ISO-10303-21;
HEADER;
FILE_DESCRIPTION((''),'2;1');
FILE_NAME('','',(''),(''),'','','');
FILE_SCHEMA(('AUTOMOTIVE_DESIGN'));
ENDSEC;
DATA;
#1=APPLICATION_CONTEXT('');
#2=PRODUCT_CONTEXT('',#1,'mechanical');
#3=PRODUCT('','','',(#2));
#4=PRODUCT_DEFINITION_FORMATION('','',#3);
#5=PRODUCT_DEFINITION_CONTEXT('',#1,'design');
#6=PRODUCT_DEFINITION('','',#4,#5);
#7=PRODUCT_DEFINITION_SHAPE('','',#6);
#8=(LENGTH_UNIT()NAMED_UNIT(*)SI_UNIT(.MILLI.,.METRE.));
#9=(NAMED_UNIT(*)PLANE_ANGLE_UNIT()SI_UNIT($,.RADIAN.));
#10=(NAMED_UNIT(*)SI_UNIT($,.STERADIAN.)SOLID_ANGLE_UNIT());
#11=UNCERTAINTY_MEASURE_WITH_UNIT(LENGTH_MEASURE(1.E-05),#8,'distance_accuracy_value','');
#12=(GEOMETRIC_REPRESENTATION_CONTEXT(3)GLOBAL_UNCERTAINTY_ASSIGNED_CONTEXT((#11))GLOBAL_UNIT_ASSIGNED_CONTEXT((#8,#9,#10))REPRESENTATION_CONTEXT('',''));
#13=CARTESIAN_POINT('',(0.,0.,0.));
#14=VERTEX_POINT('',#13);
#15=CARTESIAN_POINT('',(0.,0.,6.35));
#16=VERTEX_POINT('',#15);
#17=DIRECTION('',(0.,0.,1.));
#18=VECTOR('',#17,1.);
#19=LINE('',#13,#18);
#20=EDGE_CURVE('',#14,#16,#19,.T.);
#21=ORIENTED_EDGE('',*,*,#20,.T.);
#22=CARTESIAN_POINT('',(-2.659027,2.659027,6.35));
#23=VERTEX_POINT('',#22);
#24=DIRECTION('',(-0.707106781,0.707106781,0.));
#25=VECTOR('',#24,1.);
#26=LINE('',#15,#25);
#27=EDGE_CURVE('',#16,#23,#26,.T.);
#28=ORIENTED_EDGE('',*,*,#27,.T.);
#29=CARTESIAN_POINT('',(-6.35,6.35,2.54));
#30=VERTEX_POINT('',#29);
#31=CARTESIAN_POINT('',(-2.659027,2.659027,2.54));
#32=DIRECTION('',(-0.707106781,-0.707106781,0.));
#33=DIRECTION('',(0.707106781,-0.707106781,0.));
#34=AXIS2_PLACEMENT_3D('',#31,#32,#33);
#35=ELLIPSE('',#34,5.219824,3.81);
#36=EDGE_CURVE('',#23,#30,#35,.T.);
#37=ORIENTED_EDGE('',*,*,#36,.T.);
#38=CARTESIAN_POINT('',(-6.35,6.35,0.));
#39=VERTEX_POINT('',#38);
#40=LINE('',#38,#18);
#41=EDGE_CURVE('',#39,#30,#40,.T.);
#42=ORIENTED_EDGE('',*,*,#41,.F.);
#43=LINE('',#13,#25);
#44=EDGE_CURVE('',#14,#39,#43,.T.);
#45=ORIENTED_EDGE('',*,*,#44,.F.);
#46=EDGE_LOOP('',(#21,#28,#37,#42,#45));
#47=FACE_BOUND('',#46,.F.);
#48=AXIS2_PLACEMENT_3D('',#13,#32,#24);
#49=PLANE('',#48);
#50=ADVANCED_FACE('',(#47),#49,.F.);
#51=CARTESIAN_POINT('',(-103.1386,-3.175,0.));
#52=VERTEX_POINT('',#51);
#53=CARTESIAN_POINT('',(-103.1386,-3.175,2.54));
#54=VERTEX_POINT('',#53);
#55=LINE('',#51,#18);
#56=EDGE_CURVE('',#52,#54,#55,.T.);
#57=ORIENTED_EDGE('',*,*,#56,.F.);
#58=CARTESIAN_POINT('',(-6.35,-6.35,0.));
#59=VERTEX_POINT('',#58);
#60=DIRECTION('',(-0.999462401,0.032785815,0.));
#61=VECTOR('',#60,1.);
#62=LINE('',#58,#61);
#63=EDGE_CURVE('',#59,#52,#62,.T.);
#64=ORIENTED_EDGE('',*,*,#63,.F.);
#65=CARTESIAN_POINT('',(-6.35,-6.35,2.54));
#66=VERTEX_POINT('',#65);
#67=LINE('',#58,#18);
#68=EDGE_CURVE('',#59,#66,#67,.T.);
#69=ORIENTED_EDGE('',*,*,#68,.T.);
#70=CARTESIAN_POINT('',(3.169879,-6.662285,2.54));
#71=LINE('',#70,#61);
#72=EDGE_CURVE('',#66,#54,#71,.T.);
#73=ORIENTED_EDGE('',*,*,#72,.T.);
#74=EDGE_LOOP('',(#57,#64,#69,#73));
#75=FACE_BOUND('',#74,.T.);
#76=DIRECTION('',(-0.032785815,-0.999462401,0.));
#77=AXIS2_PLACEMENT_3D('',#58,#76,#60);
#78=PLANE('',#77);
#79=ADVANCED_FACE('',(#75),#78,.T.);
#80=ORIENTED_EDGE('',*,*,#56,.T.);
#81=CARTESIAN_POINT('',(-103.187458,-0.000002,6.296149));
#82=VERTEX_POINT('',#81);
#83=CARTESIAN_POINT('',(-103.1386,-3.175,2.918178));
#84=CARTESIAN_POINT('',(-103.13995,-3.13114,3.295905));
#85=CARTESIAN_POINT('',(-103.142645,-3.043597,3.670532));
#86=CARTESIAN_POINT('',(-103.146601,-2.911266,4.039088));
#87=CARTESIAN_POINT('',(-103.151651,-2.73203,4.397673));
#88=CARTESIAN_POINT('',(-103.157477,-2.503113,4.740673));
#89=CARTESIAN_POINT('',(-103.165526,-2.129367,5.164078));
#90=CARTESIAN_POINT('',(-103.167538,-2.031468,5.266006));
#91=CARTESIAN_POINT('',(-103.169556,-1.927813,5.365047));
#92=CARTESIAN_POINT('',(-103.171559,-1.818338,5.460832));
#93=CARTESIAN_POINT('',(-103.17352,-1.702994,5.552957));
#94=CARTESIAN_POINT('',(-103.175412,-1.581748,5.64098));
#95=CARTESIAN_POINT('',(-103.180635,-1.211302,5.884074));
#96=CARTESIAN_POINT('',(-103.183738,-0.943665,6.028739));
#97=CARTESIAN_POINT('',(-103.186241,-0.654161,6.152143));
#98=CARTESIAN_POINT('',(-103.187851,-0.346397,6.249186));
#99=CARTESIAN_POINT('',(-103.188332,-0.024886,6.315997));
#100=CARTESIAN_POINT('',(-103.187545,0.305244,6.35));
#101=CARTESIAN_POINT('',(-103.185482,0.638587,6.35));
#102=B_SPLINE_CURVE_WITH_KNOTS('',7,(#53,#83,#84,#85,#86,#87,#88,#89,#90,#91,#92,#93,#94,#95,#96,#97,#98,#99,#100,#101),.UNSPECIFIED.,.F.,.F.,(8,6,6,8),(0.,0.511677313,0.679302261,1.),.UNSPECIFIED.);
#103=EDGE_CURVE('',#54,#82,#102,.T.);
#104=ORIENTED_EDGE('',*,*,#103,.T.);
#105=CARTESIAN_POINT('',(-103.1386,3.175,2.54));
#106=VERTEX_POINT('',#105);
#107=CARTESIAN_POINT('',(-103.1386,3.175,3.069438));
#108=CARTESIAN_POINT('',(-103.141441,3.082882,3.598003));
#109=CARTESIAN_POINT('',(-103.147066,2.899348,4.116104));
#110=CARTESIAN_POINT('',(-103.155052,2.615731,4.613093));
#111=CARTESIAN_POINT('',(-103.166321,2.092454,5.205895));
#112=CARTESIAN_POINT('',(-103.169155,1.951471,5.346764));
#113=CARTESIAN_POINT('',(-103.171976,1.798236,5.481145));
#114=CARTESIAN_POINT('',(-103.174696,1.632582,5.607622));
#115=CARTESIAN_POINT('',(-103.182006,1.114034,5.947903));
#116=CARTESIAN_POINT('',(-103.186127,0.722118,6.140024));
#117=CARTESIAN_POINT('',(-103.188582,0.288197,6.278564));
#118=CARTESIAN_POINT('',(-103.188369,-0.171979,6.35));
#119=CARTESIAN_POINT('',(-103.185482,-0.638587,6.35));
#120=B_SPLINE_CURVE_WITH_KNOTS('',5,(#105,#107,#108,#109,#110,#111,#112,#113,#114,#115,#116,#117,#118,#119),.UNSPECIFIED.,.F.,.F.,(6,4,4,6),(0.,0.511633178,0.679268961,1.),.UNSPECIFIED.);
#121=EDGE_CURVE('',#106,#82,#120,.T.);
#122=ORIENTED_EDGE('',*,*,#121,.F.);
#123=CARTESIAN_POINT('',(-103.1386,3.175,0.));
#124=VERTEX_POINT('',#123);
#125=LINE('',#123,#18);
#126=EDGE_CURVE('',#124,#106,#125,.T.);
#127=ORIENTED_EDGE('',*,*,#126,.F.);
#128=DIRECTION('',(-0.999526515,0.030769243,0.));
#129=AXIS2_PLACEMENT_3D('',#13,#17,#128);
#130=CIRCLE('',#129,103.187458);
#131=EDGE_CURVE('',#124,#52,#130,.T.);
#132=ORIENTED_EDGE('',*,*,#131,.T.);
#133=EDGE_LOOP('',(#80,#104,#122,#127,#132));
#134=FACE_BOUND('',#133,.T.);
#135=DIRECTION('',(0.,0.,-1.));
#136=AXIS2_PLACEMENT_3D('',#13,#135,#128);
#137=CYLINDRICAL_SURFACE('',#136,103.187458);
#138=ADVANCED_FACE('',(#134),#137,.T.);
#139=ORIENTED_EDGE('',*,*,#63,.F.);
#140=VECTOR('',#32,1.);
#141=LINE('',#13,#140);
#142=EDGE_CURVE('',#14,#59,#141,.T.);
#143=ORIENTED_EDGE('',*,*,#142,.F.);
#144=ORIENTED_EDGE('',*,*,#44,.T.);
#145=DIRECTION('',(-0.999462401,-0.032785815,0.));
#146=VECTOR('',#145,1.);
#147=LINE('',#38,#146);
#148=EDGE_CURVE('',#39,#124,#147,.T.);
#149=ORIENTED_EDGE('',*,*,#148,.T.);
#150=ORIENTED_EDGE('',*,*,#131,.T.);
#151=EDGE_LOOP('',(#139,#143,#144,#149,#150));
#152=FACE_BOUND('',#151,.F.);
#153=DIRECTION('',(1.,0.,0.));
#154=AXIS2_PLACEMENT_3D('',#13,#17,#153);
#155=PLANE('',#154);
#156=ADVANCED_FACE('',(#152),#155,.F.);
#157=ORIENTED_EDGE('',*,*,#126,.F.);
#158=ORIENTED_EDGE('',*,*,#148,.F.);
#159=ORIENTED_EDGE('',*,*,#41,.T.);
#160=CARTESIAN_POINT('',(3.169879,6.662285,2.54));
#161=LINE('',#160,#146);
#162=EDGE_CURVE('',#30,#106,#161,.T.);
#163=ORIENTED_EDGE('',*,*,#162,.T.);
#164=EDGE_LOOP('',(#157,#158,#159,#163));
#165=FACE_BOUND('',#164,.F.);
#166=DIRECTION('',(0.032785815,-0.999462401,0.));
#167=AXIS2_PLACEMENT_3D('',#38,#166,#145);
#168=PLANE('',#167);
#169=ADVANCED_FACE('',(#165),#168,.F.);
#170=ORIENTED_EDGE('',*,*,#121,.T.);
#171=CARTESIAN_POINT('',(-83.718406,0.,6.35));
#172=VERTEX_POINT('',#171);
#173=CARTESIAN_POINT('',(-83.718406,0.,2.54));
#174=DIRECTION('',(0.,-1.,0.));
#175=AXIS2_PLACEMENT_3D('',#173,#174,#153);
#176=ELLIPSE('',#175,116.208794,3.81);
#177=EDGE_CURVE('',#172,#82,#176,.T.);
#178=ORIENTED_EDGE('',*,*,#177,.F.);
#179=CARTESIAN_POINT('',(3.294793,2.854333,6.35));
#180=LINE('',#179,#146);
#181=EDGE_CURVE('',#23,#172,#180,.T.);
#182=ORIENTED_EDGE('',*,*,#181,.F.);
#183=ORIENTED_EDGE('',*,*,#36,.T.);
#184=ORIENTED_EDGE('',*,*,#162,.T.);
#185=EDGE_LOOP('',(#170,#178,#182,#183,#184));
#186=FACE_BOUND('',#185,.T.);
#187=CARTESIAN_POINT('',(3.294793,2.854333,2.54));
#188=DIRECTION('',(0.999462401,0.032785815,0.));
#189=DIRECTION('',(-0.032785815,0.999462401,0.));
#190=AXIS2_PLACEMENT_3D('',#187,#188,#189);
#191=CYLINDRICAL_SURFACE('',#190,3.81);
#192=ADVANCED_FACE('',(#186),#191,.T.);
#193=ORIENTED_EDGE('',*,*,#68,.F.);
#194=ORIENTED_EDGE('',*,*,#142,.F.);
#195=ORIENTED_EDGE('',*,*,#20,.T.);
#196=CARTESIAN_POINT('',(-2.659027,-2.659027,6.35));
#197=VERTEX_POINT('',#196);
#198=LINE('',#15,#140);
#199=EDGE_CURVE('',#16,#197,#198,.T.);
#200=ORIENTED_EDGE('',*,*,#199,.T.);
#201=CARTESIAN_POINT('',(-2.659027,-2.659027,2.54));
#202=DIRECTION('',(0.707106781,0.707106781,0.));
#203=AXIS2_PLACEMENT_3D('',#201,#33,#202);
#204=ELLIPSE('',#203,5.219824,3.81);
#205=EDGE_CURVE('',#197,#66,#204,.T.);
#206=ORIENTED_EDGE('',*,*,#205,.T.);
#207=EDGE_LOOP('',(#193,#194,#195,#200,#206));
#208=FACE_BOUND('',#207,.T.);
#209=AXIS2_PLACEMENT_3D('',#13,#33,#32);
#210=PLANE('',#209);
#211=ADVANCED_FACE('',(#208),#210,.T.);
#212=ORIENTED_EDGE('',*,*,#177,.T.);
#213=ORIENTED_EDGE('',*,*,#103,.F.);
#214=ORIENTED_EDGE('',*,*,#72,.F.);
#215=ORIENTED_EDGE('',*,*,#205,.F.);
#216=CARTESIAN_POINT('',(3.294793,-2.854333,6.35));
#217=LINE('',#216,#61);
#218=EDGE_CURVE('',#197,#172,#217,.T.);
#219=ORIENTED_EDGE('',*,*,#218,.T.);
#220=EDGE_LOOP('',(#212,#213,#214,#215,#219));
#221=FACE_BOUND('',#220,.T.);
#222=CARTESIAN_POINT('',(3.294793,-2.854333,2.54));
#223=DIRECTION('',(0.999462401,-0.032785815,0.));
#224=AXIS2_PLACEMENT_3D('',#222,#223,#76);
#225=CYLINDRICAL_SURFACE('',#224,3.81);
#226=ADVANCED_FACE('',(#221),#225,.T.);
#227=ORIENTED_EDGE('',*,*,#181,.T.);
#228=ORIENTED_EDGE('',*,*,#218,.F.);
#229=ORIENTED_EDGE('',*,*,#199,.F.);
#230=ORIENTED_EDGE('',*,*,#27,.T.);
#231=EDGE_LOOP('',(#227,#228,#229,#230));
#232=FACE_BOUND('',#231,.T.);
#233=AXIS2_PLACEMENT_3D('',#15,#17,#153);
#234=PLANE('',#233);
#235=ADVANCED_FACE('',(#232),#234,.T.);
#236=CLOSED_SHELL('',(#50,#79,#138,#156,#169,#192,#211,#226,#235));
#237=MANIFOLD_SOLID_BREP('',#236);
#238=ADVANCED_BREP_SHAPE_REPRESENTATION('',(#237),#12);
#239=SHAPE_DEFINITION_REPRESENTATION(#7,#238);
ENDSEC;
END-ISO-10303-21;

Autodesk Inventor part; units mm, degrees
ref_plane "YZ Plane" through (0, 0, 0) normal (1, 0, 0) x (0, 1, 0)
ref_plane "XZ Plane" through (0, 0, 0) normal (0, 1, 0) x (-1, 0, 0)
ref_plane "XY Plane" through (0, 0, 0) normal (0, 0, 1) x (1, 0, 0)
sketch "Sketch1" plane through (0, 0, 0) normal (0, 0, 1) x (1, 0, 0)
  line L0 (0, 0) -> (-6.35, 6.35)
  line L1 (-6.35, 6.35) -> (-103.1386, 3.175)
  line L2 (0, 0) -> (-6.35, -6.35)
  line L3 (-6.35, -6.35) -> (-103.1386, -3.175)
  arc A0 (-103.1386, 3.175) -> (-103.1386, -3.175) centre (0, 0) ccw
  line L4 (0, 0) -> (24.3963, 0) construction
  dimension "d0" = 103.1875
  dimension "d1" = 6.35
  dimension "d2" = 6.35
  dimension "d8" = 135
extrude "Extrusion1" add sketch "Sketch1" along normal blind 6.35
fillet "Fillet1" radius 3.81 2 edges at (-54.7443, -4.7625, 6.35) (-54.7443, 4.7625, 6.35)
properties part number "Lift_Support"
